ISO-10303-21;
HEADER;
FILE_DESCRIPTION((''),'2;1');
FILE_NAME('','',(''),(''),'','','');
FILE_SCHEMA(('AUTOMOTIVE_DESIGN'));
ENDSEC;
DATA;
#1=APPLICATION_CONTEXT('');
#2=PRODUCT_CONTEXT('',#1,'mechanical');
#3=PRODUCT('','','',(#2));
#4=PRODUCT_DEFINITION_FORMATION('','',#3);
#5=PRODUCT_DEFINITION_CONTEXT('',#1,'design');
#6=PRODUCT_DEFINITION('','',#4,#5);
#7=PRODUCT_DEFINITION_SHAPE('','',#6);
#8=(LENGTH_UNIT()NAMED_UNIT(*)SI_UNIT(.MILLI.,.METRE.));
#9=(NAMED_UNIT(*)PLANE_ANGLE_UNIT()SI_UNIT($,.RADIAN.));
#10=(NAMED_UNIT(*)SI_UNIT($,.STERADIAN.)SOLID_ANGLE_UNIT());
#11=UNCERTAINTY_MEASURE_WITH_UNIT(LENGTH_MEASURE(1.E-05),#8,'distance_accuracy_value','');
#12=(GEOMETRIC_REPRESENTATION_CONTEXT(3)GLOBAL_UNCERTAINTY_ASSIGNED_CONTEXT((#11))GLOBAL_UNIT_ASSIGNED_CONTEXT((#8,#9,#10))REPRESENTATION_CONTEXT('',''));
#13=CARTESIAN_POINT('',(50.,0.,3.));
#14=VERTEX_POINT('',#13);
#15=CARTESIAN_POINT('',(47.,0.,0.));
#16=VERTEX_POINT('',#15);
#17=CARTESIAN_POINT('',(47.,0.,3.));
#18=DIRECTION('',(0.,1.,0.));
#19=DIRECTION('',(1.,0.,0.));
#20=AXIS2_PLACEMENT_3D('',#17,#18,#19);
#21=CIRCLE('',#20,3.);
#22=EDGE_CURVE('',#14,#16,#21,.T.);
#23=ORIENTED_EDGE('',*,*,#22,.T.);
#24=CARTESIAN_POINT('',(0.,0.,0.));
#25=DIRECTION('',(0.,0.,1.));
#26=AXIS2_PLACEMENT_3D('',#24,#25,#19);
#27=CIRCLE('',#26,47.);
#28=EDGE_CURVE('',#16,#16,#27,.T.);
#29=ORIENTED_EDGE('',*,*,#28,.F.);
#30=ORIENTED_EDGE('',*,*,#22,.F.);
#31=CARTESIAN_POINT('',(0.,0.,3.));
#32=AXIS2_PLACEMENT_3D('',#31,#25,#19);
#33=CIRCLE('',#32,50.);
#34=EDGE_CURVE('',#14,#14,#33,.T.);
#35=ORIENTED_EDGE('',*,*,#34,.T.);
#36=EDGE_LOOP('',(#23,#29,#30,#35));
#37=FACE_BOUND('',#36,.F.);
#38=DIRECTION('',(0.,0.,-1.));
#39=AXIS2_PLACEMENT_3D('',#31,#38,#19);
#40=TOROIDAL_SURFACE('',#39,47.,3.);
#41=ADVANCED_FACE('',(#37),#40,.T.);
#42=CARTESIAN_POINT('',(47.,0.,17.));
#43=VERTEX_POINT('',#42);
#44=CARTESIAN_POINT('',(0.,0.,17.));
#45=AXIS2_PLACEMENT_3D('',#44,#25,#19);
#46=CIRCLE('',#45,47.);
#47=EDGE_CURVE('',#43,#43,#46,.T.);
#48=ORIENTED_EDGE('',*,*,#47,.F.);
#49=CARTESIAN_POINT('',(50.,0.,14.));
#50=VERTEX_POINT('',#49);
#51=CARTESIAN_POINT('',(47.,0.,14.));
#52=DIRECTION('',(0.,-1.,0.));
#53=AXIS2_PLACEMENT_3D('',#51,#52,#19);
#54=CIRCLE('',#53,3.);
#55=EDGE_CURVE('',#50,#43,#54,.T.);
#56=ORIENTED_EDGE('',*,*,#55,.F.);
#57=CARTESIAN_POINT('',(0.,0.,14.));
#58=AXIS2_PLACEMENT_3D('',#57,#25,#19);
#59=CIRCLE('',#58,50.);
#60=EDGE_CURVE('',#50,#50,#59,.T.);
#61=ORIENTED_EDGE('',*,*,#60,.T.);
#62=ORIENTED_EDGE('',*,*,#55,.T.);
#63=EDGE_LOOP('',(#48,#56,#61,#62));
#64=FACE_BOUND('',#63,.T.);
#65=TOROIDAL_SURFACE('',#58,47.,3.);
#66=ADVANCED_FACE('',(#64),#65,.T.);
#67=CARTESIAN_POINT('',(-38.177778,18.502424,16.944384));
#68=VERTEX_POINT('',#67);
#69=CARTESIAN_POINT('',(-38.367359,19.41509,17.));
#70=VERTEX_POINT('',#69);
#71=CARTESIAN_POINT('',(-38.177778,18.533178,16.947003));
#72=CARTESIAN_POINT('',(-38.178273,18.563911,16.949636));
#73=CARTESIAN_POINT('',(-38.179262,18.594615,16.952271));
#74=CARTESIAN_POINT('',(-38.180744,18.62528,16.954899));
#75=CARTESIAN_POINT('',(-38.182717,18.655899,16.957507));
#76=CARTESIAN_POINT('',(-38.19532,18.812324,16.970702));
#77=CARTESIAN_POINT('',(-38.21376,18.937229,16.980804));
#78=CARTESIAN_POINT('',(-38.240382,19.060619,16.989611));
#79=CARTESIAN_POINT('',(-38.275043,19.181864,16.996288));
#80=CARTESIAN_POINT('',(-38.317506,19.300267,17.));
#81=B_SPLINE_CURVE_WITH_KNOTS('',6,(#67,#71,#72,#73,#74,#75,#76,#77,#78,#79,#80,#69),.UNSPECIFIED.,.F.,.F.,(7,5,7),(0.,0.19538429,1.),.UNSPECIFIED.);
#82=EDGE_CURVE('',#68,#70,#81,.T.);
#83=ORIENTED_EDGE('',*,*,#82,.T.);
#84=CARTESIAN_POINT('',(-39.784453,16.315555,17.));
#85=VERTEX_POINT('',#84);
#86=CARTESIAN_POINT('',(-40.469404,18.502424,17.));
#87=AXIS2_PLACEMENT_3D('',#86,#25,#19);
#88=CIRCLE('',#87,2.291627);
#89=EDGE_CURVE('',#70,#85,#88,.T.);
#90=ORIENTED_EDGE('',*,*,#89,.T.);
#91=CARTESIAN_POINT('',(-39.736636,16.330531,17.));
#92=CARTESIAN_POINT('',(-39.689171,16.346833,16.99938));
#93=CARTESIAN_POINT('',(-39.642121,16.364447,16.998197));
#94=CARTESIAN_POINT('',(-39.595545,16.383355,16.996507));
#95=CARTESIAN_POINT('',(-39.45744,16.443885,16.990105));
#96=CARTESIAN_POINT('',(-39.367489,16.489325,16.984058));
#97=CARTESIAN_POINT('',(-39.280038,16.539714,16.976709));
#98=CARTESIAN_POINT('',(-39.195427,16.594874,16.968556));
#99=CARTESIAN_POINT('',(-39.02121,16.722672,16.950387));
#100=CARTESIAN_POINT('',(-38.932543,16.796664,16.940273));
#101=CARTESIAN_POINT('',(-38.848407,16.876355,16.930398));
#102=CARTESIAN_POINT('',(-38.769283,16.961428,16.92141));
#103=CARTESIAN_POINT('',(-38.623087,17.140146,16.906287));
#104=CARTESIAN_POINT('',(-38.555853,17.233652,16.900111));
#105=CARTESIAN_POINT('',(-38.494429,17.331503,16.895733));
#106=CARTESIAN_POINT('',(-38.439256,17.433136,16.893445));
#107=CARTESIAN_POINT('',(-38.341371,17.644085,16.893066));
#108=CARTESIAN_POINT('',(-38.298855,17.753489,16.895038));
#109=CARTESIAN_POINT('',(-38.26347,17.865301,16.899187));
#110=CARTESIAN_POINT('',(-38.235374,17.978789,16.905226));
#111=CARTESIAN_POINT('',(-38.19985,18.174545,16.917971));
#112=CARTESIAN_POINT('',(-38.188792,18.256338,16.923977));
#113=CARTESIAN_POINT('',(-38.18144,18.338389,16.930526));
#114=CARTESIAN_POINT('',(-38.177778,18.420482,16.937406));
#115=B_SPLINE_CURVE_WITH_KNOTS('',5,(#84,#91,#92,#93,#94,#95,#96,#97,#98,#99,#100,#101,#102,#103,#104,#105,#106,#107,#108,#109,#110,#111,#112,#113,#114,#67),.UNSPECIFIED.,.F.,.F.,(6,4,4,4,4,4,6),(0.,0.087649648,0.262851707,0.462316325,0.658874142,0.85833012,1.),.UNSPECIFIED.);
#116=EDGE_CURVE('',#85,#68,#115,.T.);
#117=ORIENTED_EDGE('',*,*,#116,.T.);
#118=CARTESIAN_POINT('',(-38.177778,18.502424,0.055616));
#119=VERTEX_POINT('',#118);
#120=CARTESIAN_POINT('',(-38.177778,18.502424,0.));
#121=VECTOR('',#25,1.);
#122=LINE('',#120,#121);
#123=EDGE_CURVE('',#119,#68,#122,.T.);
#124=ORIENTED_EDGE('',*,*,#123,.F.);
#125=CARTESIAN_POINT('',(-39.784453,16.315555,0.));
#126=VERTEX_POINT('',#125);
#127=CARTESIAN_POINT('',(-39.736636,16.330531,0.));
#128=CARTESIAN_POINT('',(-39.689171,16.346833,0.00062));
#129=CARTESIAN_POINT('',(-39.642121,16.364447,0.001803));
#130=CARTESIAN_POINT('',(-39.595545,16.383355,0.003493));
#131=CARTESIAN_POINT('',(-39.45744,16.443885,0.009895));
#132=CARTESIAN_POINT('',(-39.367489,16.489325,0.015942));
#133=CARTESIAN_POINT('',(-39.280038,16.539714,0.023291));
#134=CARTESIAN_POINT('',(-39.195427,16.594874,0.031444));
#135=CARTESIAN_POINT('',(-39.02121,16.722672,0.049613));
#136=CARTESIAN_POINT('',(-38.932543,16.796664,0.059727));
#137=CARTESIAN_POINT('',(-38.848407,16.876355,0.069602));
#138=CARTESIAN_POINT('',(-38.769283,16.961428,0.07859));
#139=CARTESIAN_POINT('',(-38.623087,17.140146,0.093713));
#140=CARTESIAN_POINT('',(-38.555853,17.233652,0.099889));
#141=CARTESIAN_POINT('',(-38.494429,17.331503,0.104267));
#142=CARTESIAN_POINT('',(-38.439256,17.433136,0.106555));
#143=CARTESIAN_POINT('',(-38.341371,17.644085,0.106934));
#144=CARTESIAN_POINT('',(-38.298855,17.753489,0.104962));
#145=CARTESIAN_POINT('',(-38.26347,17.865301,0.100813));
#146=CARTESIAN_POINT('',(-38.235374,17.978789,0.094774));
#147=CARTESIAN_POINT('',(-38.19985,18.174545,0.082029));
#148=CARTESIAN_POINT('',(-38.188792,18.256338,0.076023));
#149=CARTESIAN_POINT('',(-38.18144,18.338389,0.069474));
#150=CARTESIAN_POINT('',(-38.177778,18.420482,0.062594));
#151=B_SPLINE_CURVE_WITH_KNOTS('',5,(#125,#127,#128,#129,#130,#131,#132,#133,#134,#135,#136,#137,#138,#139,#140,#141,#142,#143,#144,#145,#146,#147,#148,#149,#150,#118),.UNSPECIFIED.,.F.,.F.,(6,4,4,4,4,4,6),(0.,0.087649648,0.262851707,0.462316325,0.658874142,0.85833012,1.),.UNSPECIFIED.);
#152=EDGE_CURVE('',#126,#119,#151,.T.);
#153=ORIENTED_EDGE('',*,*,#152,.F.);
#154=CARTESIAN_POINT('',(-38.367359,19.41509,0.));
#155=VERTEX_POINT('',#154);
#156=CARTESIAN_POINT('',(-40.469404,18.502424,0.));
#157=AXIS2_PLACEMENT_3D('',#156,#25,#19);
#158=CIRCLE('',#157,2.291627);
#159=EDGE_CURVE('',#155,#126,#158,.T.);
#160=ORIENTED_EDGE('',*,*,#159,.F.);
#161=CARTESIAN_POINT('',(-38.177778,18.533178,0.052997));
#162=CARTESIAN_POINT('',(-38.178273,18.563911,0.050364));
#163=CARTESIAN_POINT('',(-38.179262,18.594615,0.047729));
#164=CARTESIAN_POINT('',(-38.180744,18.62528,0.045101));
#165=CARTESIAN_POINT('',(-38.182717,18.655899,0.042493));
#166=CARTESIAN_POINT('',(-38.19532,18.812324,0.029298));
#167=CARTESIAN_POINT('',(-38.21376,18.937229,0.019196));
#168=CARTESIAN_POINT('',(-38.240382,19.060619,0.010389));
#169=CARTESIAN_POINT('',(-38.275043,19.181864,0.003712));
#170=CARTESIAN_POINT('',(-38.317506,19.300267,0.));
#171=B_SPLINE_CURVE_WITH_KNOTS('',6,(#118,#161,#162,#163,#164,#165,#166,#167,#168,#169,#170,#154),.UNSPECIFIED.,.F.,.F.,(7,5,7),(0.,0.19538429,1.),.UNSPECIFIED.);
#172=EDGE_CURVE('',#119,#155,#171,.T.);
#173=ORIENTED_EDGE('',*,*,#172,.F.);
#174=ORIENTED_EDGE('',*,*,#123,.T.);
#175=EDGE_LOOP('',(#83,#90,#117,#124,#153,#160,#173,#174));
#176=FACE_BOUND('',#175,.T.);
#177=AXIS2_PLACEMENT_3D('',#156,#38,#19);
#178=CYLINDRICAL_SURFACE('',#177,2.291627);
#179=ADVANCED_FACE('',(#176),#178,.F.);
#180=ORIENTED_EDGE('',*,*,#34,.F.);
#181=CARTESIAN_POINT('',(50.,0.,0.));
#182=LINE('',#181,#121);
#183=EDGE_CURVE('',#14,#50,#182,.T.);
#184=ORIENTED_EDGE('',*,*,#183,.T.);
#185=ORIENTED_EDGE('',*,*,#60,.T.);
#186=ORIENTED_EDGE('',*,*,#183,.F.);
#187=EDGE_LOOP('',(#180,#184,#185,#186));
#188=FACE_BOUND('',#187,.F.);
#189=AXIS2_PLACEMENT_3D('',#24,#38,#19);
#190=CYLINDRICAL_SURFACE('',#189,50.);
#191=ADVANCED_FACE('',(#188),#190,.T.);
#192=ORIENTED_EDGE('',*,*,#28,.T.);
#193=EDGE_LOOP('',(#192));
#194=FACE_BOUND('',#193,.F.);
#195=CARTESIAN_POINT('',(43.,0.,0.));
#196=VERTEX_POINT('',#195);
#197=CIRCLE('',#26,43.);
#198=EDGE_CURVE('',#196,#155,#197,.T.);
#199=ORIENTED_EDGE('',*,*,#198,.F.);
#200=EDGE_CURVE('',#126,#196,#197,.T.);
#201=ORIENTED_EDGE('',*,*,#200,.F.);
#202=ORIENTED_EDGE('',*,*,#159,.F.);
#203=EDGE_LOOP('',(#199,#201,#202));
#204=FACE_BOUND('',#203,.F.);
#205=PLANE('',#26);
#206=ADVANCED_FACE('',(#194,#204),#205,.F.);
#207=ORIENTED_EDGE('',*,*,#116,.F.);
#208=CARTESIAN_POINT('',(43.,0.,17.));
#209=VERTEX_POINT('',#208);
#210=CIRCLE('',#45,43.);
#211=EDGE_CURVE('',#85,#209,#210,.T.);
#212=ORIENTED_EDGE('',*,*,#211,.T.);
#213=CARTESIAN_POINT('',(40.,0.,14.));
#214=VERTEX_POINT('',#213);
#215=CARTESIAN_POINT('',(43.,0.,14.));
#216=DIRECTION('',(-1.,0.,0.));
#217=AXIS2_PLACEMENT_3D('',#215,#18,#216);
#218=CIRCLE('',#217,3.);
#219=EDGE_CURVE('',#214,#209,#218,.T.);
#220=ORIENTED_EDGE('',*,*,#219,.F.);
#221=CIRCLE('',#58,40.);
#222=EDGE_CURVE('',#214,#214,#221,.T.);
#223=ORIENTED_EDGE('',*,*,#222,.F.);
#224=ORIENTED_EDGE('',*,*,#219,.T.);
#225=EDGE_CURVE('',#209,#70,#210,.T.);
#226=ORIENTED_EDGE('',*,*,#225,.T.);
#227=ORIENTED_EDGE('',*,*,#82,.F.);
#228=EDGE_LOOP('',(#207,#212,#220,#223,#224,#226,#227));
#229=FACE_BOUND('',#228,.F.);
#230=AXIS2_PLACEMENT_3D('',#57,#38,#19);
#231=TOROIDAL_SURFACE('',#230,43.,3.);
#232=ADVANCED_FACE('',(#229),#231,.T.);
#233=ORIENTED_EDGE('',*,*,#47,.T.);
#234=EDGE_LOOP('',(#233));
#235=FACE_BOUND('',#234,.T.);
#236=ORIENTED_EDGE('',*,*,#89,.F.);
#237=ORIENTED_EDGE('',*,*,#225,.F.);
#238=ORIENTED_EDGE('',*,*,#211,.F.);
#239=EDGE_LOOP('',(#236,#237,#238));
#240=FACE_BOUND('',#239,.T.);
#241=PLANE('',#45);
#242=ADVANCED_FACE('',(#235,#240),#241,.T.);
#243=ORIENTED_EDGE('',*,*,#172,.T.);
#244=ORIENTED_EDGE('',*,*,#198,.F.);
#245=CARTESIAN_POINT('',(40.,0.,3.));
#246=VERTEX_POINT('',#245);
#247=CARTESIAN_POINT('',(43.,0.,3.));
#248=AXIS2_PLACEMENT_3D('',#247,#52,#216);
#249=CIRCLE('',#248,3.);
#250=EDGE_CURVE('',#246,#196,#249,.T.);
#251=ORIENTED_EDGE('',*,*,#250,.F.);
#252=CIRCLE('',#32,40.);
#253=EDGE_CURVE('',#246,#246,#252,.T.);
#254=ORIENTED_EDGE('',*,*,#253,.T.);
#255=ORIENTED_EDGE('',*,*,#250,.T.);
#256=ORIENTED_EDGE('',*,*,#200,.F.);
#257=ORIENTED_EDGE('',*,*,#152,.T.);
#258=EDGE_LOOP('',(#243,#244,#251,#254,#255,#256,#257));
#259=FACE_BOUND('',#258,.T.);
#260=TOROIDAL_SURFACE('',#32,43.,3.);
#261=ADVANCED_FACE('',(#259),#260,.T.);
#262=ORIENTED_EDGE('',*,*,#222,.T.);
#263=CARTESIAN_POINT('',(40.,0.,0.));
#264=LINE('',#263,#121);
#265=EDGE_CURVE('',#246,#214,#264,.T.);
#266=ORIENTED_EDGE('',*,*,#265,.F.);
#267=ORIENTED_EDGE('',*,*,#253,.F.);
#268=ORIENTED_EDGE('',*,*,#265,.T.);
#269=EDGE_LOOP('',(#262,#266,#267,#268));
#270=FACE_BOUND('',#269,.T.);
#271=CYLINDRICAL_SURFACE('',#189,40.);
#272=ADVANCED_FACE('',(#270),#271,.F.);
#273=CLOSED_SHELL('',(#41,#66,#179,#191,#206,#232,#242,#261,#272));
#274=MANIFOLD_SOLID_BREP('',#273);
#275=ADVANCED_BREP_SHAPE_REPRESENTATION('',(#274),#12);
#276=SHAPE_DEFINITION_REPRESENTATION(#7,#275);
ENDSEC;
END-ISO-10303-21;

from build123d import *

# Parameters (mm, degrees)
F0_R     = 50
F0_R_2   = 2.2916267838
F0_R_3   = 40
F1_DEPTH = 17


# Not quite as in the source:
# - a fillet or chamfer that OpenCascade refuses, or shapes differently, is made with other operations: its cross-section is extruded or revolved along the edge and cut away or added


with BuildPart() as f1:
    # F0 (on Top) → F1 (new body)
    with BuildSketch(Plane.XY):
        Circle(F0_R)
        with Locations((-40.46940431, 18.5024235398)):
            Circle(F0_R_2, mode=Mode.SUBTRACT)
        Circle(F0_R_3, mode=Mode.SUBTRACT)
    extrude(amount=F1_DEPTH)

    # F2: fillet of radius 3 on 5 edges, made by hand

    # F2_s1 → F2_t2 (revolve, cut)
    with BuildSketch(Plane.XZ):
        with BuildLine():
            ThreePointArc((50, 3), (49.1213203436, 0.8786796564), (47, 0))
            Line((47, 0), (50, 0))
            Line((50, 0), (50, 3))
        make_face()
    revolve(axis=Axis((0, 0, 0), (0, 0, 1)), mode=Mode.SUBTRACT)

    # F2_s3 → F2_t4 (revolve, cut)
    with BuildSketch(Plane.XZ):
        with BuildLine():
            ThreePointArc((50, 14), (49.1213203436, 16.1213203436), (47, 17))
            Line((47, 17), (50, 17))
            Line((50, 17), (50, 14))
        make_face()
    revolve(axis=Axis((0, 0, 17), (0, 0, 1)), mode=Mode.SUBTRACT)

    # F2_s5 → F2_t6 (revolve, cut)
    with BuildSketch(Plane.XZ):
        with BuildLine():
            ThreePointArc((40, 14), (40.8786796564, 16.1213203436), (43, 17))
            Line((43, 17), (40, 17))
            Line((40, 17), (40, 14))
        make_face()
    revolve(axis=Axis((0, 0, 17), (0, 0, 1)), mode=Mode.SUBTRACT)

    # F2_s7 → F2_t8 (revolve, cut)
    with BuildSketch(Plane.XZ):
        with BuildLine():
            ThreePointArc((40, 3), (40.8786796564, 0.8786796564), (43, 0))
            Line((43, 0), (40, 0))
            Line((40, 0), (40, 3))
        make_face()
    revolve(axis=Axis((0, 0, 0), (0, 0, 1)), mode=Mode.SUBTRACT)


solid = f1.part
